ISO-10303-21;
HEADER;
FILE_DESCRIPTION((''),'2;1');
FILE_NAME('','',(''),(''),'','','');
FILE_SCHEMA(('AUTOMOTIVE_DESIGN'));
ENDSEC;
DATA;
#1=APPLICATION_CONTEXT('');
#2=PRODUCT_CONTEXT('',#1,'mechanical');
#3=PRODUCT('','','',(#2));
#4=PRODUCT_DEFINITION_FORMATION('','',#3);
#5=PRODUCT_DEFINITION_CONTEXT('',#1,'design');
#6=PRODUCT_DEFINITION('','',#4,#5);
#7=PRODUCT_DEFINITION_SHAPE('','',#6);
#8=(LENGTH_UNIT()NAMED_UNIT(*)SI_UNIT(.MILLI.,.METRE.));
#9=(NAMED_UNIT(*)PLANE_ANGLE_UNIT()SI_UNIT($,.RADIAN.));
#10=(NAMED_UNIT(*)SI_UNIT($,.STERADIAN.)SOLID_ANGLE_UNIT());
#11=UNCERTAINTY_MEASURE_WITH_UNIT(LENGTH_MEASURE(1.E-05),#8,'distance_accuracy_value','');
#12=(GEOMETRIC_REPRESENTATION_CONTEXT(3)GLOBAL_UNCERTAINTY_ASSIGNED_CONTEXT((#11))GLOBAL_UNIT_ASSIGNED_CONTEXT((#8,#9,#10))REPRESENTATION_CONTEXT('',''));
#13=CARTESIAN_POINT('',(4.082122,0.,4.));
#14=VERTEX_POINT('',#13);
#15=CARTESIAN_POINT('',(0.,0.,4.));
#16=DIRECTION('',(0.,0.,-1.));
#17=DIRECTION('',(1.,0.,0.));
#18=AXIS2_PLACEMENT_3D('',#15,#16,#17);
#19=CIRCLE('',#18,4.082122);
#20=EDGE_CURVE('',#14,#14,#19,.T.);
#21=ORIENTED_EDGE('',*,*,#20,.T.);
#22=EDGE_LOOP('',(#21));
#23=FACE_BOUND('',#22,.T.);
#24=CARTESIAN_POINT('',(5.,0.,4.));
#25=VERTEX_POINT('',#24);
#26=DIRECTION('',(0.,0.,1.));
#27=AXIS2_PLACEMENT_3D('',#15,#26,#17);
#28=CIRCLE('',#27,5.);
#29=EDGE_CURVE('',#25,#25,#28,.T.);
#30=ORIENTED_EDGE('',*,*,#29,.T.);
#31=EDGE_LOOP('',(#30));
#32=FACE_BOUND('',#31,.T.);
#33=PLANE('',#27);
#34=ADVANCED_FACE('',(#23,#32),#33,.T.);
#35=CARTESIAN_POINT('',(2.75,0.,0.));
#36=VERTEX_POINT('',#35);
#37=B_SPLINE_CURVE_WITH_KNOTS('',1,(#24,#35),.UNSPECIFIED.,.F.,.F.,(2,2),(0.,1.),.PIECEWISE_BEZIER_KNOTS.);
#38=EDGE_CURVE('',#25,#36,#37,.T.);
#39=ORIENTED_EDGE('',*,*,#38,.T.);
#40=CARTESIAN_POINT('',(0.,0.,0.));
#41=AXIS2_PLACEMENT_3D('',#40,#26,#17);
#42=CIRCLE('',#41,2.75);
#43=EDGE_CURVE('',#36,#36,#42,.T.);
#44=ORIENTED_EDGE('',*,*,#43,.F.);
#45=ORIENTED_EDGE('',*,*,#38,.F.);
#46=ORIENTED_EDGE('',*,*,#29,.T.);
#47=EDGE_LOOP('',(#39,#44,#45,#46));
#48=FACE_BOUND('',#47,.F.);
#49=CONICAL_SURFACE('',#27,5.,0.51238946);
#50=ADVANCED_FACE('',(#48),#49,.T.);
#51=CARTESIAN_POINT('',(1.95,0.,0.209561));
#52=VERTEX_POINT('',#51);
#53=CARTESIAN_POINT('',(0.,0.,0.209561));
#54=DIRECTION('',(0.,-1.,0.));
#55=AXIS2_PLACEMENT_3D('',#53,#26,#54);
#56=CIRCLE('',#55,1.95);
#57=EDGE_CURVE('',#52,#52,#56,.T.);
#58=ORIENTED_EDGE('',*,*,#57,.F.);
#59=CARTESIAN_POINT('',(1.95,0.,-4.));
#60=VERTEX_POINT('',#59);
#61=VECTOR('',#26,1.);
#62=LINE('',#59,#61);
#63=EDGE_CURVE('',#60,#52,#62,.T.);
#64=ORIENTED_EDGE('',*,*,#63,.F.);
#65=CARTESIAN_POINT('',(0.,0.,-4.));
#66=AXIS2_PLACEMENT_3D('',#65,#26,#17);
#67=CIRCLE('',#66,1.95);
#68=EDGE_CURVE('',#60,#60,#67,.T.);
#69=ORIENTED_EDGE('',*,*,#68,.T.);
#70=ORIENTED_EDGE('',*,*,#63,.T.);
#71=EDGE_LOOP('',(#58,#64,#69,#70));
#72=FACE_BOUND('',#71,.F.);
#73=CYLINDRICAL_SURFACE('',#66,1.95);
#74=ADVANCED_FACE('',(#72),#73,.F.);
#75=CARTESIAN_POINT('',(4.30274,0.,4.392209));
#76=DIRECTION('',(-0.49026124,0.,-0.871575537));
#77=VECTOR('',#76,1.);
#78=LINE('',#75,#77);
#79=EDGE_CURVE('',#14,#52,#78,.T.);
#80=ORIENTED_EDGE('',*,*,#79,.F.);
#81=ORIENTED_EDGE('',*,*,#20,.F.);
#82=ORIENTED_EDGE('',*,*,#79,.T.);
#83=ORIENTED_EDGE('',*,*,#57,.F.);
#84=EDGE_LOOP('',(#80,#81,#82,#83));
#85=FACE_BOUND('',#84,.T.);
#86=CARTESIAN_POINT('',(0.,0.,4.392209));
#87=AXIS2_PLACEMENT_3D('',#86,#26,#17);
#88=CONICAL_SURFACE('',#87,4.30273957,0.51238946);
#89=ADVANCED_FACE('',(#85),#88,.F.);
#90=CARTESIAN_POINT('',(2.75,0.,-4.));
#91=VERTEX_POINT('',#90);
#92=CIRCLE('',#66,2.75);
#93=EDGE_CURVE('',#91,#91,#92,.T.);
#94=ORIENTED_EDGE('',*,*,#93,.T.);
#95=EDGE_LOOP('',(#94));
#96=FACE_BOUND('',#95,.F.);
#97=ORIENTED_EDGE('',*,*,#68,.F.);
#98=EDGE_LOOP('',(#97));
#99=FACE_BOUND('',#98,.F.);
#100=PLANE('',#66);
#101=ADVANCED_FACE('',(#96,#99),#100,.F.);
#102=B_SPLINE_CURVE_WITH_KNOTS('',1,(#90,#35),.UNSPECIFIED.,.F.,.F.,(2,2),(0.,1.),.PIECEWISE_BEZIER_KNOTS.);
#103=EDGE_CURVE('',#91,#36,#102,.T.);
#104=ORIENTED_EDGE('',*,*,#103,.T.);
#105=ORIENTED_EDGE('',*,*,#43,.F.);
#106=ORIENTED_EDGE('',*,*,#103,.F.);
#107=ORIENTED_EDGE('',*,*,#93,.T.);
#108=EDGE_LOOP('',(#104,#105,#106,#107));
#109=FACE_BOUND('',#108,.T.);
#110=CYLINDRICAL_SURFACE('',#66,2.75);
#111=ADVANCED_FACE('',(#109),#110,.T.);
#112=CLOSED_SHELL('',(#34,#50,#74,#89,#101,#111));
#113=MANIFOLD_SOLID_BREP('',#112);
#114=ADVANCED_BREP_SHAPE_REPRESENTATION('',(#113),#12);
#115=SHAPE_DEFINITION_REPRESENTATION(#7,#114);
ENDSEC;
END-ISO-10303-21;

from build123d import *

# Parameters (mm, degrees)
F2_R      = 5
F0_R      = 2.75
F4_R      = 2.75
F6_FACE_R = 2.75
F8_T      = -0.8


with BuildPart() as f6:
    # F2 (on offset) → F6 section 0
    with BuildSketch(Plane.XY.offset(4)):
        Circle(F2_R)
    # F0 (on Top) → F6 section 1
    with BuildSketch(Plane.XY):
        Circle(F0_R)
    loft()

    # F4 (on offset) → F7 section 0
    with BuildSketch(Plane.XY.offset(-4)):
        Circle(F4_R)
    # F6_face (on face) → F7 section 1
    with BuildSketch(Plane(origin=(0, 0, 0), x_dir=(1, 0, 0), z_dir=(0, 0, -1))):
        Circle(F6_FACE_R)
    loft()

    # F8
    f8_openings = [f6.faces().sort_by_distance(p)[0] for p in [
        (0, 0, 4),
        (0, 0, -4),
    ]]
    offset(amount=F8_T, openings=f8_openings, kind=Kind.INTERSECTION)


solid = f6.part
